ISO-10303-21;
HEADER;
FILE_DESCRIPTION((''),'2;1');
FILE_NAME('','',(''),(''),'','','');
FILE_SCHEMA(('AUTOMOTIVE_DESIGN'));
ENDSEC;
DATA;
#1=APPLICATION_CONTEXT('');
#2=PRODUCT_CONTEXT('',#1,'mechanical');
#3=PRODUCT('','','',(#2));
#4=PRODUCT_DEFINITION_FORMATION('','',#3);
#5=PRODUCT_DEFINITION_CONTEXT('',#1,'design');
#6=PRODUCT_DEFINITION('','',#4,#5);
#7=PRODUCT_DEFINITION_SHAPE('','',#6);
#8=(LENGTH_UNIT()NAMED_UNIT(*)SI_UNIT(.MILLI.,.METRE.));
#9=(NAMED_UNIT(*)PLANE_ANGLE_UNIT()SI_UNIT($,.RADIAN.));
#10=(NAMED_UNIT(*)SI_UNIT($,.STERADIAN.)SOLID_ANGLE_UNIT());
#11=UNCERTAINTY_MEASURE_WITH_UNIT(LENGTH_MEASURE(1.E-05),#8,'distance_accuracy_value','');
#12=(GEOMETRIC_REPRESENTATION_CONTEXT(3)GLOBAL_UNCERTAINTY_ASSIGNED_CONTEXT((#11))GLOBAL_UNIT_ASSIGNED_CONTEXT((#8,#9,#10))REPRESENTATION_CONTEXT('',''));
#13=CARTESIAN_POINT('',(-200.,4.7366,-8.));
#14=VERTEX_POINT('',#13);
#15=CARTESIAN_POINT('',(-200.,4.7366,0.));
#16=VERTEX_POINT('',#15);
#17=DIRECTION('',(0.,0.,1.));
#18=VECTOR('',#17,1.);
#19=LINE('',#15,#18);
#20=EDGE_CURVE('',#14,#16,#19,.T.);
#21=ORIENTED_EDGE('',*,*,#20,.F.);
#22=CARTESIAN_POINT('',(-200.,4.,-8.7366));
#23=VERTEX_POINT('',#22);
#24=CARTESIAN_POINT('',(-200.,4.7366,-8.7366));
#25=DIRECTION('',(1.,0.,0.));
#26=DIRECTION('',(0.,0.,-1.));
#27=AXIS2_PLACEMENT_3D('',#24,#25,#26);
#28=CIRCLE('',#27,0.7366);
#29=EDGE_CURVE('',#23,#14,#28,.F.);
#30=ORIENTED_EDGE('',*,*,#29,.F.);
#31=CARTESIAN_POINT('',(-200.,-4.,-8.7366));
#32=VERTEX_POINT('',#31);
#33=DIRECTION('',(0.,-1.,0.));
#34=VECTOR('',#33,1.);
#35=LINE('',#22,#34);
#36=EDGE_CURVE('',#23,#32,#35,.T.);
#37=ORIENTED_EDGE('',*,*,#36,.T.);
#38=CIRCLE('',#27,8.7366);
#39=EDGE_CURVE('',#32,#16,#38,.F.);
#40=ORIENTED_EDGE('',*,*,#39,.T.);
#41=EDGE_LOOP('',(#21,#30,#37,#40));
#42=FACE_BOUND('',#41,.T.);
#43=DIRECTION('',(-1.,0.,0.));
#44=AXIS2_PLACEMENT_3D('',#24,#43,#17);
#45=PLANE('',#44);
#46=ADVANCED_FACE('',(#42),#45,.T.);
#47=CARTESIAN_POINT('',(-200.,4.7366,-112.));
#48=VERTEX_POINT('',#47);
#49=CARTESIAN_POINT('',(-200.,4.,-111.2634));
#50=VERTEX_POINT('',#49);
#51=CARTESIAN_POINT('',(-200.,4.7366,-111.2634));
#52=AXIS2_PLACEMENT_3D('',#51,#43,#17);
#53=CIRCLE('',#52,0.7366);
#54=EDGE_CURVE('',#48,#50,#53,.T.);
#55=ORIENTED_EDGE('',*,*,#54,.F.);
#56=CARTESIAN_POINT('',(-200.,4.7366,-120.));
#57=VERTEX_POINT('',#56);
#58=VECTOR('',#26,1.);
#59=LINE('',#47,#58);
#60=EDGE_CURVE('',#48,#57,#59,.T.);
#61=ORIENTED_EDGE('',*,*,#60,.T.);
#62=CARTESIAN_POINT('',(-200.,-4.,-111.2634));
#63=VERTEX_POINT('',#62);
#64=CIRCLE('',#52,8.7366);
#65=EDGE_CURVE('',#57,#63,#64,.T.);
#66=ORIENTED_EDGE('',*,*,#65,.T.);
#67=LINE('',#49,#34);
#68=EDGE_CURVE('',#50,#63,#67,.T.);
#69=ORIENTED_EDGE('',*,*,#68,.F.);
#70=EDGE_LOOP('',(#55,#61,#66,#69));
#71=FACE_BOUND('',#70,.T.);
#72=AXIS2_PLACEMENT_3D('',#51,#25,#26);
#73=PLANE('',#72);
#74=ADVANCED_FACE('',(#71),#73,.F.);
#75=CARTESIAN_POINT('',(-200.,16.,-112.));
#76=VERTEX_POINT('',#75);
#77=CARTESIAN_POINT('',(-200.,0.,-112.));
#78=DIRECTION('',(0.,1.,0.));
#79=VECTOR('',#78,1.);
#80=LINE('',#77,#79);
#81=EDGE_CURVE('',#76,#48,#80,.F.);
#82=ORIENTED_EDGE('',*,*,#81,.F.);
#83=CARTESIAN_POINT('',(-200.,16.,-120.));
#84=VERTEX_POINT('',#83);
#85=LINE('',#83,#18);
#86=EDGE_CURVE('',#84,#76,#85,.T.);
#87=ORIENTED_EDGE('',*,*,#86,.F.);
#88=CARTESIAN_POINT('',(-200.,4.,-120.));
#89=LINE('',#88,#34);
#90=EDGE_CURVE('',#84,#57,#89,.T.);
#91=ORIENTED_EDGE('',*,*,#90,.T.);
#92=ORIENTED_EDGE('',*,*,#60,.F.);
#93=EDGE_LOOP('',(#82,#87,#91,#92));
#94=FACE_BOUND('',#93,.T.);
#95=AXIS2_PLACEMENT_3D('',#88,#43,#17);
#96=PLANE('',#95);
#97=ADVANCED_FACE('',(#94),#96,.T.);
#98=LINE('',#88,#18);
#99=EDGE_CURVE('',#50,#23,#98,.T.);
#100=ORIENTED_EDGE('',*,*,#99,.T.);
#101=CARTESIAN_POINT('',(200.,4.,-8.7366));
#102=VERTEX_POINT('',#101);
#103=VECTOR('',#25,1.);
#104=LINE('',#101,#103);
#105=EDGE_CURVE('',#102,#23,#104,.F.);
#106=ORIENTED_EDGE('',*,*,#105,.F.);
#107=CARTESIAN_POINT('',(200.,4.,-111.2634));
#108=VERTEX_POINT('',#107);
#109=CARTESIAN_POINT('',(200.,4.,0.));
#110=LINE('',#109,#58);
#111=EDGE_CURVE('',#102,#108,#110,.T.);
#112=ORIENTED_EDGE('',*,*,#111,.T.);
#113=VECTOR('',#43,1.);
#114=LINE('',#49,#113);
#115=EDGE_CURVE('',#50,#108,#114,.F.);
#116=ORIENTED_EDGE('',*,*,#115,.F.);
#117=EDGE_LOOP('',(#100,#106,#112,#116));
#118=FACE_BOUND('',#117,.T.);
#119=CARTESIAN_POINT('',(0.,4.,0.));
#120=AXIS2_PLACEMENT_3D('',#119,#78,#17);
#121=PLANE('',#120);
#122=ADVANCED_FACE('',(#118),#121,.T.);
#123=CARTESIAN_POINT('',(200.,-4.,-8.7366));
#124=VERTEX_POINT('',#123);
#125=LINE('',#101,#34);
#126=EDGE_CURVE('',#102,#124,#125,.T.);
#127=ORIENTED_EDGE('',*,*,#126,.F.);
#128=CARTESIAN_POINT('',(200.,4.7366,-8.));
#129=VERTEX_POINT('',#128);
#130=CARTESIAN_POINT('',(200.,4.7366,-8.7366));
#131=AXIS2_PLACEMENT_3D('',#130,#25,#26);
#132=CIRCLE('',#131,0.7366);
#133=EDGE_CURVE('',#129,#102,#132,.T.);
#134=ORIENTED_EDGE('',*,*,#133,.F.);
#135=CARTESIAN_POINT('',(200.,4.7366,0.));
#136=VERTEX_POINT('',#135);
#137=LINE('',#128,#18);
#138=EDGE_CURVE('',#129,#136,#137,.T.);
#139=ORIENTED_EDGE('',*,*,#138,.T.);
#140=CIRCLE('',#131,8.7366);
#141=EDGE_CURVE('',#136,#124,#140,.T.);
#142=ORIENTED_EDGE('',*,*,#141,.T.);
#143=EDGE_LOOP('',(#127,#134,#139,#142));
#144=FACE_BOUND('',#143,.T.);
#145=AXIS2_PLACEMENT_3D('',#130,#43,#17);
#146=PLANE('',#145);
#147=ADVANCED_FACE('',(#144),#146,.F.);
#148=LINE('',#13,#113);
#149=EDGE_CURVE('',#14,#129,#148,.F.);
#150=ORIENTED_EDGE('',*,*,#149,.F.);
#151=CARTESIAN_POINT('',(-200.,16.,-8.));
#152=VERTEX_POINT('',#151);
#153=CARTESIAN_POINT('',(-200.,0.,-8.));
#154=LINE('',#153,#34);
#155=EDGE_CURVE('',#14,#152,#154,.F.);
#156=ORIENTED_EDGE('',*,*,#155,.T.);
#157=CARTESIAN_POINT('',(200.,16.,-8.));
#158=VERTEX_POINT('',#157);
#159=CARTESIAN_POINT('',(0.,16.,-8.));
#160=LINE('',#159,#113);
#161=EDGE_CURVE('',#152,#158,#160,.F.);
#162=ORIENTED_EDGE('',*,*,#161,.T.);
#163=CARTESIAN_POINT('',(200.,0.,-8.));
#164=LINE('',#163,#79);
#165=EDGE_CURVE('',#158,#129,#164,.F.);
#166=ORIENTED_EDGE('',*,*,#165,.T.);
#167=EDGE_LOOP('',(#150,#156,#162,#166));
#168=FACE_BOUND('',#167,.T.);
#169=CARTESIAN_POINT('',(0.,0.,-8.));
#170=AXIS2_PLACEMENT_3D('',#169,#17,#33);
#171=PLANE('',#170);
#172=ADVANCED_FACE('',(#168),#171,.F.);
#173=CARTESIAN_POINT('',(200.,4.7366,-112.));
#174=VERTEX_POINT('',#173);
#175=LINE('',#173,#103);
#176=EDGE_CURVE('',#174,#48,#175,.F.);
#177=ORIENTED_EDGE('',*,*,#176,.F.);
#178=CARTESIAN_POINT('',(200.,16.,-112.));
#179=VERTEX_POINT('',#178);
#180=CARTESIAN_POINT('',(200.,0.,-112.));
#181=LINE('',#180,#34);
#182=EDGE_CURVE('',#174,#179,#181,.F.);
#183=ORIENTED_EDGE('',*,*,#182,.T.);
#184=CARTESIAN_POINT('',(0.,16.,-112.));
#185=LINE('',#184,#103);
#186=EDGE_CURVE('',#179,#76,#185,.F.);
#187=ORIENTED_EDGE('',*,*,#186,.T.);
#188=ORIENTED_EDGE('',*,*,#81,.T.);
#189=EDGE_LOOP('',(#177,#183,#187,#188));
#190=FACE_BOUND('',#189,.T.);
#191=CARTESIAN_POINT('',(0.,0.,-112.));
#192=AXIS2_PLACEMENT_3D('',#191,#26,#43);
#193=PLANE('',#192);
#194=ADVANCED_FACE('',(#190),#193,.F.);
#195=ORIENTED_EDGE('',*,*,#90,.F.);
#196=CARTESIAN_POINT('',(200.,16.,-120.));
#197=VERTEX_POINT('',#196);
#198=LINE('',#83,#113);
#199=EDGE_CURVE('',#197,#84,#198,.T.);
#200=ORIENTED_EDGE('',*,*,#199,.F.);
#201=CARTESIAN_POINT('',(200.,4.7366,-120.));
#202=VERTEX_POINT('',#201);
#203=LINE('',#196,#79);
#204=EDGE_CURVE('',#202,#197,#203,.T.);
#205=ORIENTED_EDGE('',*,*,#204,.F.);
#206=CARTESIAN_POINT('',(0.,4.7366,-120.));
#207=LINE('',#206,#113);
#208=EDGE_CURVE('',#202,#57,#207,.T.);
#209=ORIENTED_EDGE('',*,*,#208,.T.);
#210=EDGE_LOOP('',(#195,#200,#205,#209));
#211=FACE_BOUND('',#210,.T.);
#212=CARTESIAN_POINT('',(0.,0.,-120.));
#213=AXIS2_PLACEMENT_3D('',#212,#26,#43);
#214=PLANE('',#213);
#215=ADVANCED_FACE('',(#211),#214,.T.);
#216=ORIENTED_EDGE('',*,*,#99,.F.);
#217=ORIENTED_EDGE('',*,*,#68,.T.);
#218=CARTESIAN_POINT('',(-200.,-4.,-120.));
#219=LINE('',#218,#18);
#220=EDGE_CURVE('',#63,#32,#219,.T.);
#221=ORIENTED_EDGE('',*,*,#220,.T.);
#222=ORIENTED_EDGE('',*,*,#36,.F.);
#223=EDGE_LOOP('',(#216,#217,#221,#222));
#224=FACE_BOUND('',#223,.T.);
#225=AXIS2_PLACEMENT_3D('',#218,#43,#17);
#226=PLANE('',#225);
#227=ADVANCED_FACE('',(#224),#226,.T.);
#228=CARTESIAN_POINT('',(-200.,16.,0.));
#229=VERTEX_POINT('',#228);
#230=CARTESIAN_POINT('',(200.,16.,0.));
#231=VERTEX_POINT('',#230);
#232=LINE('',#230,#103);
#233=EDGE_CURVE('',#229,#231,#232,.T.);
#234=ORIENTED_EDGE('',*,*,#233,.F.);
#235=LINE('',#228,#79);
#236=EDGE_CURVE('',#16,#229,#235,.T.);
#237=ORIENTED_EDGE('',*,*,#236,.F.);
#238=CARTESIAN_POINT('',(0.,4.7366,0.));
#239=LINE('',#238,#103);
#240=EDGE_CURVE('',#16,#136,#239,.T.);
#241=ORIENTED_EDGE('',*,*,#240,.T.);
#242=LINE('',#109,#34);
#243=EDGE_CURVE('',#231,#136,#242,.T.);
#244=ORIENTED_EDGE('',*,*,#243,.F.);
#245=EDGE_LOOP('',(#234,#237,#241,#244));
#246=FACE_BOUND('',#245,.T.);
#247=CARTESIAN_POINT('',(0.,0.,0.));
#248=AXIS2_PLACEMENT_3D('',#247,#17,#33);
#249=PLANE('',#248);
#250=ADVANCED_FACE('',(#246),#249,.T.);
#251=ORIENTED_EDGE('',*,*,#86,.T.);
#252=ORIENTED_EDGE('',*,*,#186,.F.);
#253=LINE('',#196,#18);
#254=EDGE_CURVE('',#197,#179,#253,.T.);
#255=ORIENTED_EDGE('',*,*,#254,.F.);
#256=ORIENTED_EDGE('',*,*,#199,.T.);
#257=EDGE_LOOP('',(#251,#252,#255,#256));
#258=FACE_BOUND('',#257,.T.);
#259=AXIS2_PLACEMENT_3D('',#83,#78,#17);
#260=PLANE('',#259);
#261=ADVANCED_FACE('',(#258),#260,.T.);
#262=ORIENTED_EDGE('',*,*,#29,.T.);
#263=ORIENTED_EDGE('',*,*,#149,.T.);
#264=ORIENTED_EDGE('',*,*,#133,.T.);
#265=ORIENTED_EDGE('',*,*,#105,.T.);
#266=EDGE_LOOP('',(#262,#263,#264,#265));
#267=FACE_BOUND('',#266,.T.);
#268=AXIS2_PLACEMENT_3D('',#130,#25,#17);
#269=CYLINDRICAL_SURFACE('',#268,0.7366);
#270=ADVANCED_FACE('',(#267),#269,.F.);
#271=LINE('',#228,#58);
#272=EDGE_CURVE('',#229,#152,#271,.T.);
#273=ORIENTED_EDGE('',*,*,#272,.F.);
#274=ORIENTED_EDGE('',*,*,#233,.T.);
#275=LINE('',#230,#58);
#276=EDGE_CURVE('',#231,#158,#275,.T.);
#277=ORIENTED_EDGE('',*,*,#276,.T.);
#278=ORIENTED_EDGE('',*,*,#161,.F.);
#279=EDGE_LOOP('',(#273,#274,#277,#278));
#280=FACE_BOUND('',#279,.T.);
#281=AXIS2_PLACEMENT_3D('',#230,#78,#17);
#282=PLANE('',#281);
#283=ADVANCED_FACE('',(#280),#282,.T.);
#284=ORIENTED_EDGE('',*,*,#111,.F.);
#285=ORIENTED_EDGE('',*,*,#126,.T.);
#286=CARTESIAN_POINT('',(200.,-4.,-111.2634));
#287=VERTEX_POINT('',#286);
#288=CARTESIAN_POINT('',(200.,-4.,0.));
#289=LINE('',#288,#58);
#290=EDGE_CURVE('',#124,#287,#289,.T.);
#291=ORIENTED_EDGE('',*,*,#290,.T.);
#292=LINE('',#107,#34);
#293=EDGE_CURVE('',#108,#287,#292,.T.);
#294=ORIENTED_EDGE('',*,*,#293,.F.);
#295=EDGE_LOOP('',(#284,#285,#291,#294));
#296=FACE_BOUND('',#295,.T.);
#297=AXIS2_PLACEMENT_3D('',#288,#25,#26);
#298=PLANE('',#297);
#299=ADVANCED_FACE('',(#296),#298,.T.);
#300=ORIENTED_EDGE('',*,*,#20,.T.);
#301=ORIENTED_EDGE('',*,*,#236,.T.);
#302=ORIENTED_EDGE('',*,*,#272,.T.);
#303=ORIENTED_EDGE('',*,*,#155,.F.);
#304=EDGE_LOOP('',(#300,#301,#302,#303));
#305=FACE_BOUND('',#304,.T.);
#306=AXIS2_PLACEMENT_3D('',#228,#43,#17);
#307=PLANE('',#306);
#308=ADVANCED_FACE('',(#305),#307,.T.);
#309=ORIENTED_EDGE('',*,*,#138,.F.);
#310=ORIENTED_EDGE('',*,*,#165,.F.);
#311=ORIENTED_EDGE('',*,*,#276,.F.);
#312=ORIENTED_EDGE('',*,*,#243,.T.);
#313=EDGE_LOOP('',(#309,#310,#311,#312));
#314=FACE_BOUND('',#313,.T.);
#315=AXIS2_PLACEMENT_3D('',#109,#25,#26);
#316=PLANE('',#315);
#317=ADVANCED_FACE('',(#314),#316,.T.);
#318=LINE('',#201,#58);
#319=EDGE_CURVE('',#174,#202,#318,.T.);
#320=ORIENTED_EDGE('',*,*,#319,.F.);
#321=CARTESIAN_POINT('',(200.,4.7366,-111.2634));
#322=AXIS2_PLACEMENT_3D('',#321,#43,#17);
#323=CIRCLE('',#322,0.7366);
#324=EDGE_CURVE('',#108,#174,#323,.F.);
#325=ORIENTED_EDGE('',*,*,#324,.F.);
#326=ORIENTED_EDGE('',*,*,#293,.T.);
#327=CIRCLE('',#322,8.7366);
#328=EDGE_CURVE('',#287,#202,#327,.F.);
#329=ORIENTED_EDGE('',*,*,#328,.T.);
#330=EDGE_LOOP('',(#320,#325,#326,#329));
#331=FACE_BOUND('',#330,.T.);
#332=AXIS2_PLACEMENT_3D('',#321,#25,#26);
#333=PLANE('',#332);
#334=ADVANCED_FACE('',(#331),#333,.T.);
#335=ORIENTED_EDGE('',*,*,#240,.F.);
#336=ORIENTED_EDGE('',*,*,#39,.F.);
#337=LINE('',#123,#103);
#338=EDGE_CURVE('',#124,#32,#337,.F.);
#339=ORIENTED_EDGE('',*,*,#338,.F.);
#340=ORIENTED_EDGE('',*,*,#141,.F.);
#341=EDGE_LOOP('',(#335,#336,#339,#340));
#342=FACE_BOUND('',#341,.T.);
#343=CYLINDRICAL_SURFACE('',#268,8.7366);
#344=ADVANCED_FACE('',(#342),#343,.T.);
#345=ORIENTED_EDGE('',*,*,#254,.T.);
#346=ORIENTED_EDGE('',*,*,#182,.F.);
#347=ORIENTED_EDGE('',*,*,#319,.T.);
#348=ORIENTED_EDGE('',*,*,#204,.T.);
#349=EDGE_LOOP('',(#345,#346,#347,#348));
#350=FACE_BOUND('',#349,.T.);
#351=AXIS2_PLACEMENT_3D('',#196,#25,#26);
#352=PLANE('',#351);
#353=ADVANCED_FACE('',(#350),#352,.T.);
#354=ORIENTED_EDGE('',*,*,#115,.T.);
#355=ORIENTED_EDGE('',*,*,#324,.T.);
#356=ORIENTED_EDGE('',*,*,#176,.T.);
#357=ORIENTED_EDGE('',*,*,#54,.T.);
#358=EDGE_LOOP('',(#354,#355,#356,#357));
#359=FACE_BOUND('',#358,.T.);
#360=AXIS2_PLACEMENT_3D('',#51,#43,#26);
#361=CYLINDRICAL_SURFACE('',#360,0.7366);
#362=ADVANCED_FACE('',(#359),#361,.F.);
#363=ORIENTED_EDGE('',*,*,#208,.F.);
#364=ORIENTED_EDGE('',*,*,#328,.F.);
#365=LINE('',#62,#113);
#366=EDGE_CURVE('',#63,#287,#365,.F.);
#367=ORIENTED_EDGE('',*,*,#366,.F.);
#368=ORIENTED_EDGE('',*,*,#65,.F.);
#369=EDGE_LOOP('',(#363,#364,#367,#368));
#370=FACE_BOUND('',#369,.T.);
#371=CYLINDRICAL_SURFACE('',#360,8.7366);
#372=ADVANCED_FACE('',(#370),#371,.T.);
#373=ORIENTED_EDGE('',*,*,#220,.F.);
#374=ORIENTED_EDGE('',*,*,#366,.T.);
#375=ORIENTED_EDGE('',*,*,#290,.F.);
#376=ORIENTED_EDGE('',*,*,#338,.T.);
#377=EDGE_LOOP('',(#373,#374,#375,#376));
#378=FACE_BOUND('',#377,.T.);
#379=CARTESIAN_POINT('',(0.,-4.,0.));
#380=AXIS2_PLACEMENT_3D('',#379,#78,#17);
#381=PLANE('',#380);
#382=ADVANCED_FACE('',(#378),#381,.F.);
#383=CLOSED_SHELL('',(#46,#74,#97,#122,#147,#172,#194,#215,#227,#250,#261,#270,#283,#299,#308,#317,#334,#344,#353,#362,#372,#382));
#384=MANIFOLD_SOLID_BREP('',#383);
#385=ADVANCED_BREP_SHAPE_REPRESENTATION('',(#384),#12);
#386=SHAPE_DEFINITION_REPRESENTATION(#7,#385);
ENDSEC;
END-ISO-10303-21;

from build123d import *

# Parameters (mm, degrees)
SM_START                         = -4
SM_BASE_FLANGE_1_OUTLINE_W       = 400
SM_BASE_FLANGE_1_OUTLINE_H       = 120
SM_BASE_FLANGE_1_DEPTH           = 8
SM_EDGE_FLANGE_1_STRIP_W         = 33.4732
SM_EDGE_FLANGE_1_STRIP_H         = 8
SM_EDGE_FLANGE_1_STRIP_CUT_DEPTH = 400
SM_EDGE_FLANGE_1_DEPTH           = 400
SM_EDGE_FLANGE_2_STRIP_W         = 33.4732
SM_EDGE_FLANGE_2_STRIP_H         = 8
SM_EDGE_FLANGE_2_STRIP_CUT_DEPTH = 400
SM_EDGE_FLANGE_2_DEPTH           = 400


# Read off the part's stored shape, not the designer's step: 基体-法兰1
# Sheet-metal steps are written as plain solids
with BuildPart() as part:
    # 基体-法兰1 outline → 基体-法兰1 (new body)
    with BuildSketch(Plane(origin=(0, 0, 0), x_dir=(1, 0, 0), z_dir=(0, 1, 0)).offset(SM_START)):
        with Locations((0, 60)):
            Rectangle(SM_BASE_FLANGE_1_OUTLINE_W, SM_BASE_FLANGE_1_OUTLINE_H)
    extrude(amount=SM_BASE_FLANGE_1_DEPTH)

    # 边线-法兰1 strip (across the edge) → 边线-法兰1 strip cut (cut)
    with BuildSketch(Plane(origin=(-200, 4, 0), x_dir=(0, 0, -1), z_dir=(1, 0, 0))):
        with Locations((-8, -4)):
            Rectangle(SM_EDGE_FLANGE_1_STRIP_W, SM_EDGE_FLANGE_1_STRIP_H)
    extrude(amount=SM_EDGE_FLANGE_1_STRIP_CUT_DEPTH, mode=Mode.SUBTRACT)

    # 边线-法兰1 section (across the edge) → 边线-法兰1 (add)
    with BuildSketch(Plane(origin=(-200, 4, 0), x_dir=(0, 0, -1), z_dir=(1, 0, 0))):
        with BuildLine():
            Line((0, 0.7366), (0, 12))
            Line((0, 12), (8, 12))
            Line((8, 12), (8, 0.7366))
            ThreePointArc((8, 0.7366), (8.215745145, 0.215745145), (8.7366, 0))
            Line((8.7366, 0), (8.7366, -8))
            ThreePointArc((8.7366, -8), (2.558890895, -5.441109105), (0, 0.7366))
        make_face()
    extrude(amount=SM_EDGE_FLANGE_1_DEPTH)

    # 边线-法兰2 strip (across the edge) → 边线-法兰2 strip cut (cut)
    with BuildSketch(Plane(origin=(200, 4, -120), x_dir=(0, 0, 1), z_dir=(-1, 0, 0))):
        with Locations((-8, -4)):
            Rectangle(SM_EDGE_FLANGE_2_STRIP_W, SM_EDGE_FLANGE_2_STRIP_H)
    extrude(amount=SM_EDGE_FLANGE_2_STRIP_CUT_DEPTH, mode=Mode.SUBTRACT)

    # 边线-法兰2 section (across the edge) → 边线-法兰2 (add)
    with BuildSketch(Plane(origin=(200, 4, -120), x_dir=(0, 0, 1), z_dir=(-1, 0, 0))):
        with BuildLine():
            Line((0, 0.7366), (0, 12))
            Line((0, 12), (8, 12))
            Line((8, 12), (8, 0.7366))
            ThreePointArc((8, 0.7366), (8.215745145, 0.215745145), (8.7366, 0))
            Line((8.7366, 0), (8.7366, -8))
            ThreePointArc((8.7366, -8), (2.558890895, -5.441109105), (0, 0.7366))
        make_face()
    extrude(amount=SM_EDGE_FLANGE_2_DEPTH)


solid = part.part
